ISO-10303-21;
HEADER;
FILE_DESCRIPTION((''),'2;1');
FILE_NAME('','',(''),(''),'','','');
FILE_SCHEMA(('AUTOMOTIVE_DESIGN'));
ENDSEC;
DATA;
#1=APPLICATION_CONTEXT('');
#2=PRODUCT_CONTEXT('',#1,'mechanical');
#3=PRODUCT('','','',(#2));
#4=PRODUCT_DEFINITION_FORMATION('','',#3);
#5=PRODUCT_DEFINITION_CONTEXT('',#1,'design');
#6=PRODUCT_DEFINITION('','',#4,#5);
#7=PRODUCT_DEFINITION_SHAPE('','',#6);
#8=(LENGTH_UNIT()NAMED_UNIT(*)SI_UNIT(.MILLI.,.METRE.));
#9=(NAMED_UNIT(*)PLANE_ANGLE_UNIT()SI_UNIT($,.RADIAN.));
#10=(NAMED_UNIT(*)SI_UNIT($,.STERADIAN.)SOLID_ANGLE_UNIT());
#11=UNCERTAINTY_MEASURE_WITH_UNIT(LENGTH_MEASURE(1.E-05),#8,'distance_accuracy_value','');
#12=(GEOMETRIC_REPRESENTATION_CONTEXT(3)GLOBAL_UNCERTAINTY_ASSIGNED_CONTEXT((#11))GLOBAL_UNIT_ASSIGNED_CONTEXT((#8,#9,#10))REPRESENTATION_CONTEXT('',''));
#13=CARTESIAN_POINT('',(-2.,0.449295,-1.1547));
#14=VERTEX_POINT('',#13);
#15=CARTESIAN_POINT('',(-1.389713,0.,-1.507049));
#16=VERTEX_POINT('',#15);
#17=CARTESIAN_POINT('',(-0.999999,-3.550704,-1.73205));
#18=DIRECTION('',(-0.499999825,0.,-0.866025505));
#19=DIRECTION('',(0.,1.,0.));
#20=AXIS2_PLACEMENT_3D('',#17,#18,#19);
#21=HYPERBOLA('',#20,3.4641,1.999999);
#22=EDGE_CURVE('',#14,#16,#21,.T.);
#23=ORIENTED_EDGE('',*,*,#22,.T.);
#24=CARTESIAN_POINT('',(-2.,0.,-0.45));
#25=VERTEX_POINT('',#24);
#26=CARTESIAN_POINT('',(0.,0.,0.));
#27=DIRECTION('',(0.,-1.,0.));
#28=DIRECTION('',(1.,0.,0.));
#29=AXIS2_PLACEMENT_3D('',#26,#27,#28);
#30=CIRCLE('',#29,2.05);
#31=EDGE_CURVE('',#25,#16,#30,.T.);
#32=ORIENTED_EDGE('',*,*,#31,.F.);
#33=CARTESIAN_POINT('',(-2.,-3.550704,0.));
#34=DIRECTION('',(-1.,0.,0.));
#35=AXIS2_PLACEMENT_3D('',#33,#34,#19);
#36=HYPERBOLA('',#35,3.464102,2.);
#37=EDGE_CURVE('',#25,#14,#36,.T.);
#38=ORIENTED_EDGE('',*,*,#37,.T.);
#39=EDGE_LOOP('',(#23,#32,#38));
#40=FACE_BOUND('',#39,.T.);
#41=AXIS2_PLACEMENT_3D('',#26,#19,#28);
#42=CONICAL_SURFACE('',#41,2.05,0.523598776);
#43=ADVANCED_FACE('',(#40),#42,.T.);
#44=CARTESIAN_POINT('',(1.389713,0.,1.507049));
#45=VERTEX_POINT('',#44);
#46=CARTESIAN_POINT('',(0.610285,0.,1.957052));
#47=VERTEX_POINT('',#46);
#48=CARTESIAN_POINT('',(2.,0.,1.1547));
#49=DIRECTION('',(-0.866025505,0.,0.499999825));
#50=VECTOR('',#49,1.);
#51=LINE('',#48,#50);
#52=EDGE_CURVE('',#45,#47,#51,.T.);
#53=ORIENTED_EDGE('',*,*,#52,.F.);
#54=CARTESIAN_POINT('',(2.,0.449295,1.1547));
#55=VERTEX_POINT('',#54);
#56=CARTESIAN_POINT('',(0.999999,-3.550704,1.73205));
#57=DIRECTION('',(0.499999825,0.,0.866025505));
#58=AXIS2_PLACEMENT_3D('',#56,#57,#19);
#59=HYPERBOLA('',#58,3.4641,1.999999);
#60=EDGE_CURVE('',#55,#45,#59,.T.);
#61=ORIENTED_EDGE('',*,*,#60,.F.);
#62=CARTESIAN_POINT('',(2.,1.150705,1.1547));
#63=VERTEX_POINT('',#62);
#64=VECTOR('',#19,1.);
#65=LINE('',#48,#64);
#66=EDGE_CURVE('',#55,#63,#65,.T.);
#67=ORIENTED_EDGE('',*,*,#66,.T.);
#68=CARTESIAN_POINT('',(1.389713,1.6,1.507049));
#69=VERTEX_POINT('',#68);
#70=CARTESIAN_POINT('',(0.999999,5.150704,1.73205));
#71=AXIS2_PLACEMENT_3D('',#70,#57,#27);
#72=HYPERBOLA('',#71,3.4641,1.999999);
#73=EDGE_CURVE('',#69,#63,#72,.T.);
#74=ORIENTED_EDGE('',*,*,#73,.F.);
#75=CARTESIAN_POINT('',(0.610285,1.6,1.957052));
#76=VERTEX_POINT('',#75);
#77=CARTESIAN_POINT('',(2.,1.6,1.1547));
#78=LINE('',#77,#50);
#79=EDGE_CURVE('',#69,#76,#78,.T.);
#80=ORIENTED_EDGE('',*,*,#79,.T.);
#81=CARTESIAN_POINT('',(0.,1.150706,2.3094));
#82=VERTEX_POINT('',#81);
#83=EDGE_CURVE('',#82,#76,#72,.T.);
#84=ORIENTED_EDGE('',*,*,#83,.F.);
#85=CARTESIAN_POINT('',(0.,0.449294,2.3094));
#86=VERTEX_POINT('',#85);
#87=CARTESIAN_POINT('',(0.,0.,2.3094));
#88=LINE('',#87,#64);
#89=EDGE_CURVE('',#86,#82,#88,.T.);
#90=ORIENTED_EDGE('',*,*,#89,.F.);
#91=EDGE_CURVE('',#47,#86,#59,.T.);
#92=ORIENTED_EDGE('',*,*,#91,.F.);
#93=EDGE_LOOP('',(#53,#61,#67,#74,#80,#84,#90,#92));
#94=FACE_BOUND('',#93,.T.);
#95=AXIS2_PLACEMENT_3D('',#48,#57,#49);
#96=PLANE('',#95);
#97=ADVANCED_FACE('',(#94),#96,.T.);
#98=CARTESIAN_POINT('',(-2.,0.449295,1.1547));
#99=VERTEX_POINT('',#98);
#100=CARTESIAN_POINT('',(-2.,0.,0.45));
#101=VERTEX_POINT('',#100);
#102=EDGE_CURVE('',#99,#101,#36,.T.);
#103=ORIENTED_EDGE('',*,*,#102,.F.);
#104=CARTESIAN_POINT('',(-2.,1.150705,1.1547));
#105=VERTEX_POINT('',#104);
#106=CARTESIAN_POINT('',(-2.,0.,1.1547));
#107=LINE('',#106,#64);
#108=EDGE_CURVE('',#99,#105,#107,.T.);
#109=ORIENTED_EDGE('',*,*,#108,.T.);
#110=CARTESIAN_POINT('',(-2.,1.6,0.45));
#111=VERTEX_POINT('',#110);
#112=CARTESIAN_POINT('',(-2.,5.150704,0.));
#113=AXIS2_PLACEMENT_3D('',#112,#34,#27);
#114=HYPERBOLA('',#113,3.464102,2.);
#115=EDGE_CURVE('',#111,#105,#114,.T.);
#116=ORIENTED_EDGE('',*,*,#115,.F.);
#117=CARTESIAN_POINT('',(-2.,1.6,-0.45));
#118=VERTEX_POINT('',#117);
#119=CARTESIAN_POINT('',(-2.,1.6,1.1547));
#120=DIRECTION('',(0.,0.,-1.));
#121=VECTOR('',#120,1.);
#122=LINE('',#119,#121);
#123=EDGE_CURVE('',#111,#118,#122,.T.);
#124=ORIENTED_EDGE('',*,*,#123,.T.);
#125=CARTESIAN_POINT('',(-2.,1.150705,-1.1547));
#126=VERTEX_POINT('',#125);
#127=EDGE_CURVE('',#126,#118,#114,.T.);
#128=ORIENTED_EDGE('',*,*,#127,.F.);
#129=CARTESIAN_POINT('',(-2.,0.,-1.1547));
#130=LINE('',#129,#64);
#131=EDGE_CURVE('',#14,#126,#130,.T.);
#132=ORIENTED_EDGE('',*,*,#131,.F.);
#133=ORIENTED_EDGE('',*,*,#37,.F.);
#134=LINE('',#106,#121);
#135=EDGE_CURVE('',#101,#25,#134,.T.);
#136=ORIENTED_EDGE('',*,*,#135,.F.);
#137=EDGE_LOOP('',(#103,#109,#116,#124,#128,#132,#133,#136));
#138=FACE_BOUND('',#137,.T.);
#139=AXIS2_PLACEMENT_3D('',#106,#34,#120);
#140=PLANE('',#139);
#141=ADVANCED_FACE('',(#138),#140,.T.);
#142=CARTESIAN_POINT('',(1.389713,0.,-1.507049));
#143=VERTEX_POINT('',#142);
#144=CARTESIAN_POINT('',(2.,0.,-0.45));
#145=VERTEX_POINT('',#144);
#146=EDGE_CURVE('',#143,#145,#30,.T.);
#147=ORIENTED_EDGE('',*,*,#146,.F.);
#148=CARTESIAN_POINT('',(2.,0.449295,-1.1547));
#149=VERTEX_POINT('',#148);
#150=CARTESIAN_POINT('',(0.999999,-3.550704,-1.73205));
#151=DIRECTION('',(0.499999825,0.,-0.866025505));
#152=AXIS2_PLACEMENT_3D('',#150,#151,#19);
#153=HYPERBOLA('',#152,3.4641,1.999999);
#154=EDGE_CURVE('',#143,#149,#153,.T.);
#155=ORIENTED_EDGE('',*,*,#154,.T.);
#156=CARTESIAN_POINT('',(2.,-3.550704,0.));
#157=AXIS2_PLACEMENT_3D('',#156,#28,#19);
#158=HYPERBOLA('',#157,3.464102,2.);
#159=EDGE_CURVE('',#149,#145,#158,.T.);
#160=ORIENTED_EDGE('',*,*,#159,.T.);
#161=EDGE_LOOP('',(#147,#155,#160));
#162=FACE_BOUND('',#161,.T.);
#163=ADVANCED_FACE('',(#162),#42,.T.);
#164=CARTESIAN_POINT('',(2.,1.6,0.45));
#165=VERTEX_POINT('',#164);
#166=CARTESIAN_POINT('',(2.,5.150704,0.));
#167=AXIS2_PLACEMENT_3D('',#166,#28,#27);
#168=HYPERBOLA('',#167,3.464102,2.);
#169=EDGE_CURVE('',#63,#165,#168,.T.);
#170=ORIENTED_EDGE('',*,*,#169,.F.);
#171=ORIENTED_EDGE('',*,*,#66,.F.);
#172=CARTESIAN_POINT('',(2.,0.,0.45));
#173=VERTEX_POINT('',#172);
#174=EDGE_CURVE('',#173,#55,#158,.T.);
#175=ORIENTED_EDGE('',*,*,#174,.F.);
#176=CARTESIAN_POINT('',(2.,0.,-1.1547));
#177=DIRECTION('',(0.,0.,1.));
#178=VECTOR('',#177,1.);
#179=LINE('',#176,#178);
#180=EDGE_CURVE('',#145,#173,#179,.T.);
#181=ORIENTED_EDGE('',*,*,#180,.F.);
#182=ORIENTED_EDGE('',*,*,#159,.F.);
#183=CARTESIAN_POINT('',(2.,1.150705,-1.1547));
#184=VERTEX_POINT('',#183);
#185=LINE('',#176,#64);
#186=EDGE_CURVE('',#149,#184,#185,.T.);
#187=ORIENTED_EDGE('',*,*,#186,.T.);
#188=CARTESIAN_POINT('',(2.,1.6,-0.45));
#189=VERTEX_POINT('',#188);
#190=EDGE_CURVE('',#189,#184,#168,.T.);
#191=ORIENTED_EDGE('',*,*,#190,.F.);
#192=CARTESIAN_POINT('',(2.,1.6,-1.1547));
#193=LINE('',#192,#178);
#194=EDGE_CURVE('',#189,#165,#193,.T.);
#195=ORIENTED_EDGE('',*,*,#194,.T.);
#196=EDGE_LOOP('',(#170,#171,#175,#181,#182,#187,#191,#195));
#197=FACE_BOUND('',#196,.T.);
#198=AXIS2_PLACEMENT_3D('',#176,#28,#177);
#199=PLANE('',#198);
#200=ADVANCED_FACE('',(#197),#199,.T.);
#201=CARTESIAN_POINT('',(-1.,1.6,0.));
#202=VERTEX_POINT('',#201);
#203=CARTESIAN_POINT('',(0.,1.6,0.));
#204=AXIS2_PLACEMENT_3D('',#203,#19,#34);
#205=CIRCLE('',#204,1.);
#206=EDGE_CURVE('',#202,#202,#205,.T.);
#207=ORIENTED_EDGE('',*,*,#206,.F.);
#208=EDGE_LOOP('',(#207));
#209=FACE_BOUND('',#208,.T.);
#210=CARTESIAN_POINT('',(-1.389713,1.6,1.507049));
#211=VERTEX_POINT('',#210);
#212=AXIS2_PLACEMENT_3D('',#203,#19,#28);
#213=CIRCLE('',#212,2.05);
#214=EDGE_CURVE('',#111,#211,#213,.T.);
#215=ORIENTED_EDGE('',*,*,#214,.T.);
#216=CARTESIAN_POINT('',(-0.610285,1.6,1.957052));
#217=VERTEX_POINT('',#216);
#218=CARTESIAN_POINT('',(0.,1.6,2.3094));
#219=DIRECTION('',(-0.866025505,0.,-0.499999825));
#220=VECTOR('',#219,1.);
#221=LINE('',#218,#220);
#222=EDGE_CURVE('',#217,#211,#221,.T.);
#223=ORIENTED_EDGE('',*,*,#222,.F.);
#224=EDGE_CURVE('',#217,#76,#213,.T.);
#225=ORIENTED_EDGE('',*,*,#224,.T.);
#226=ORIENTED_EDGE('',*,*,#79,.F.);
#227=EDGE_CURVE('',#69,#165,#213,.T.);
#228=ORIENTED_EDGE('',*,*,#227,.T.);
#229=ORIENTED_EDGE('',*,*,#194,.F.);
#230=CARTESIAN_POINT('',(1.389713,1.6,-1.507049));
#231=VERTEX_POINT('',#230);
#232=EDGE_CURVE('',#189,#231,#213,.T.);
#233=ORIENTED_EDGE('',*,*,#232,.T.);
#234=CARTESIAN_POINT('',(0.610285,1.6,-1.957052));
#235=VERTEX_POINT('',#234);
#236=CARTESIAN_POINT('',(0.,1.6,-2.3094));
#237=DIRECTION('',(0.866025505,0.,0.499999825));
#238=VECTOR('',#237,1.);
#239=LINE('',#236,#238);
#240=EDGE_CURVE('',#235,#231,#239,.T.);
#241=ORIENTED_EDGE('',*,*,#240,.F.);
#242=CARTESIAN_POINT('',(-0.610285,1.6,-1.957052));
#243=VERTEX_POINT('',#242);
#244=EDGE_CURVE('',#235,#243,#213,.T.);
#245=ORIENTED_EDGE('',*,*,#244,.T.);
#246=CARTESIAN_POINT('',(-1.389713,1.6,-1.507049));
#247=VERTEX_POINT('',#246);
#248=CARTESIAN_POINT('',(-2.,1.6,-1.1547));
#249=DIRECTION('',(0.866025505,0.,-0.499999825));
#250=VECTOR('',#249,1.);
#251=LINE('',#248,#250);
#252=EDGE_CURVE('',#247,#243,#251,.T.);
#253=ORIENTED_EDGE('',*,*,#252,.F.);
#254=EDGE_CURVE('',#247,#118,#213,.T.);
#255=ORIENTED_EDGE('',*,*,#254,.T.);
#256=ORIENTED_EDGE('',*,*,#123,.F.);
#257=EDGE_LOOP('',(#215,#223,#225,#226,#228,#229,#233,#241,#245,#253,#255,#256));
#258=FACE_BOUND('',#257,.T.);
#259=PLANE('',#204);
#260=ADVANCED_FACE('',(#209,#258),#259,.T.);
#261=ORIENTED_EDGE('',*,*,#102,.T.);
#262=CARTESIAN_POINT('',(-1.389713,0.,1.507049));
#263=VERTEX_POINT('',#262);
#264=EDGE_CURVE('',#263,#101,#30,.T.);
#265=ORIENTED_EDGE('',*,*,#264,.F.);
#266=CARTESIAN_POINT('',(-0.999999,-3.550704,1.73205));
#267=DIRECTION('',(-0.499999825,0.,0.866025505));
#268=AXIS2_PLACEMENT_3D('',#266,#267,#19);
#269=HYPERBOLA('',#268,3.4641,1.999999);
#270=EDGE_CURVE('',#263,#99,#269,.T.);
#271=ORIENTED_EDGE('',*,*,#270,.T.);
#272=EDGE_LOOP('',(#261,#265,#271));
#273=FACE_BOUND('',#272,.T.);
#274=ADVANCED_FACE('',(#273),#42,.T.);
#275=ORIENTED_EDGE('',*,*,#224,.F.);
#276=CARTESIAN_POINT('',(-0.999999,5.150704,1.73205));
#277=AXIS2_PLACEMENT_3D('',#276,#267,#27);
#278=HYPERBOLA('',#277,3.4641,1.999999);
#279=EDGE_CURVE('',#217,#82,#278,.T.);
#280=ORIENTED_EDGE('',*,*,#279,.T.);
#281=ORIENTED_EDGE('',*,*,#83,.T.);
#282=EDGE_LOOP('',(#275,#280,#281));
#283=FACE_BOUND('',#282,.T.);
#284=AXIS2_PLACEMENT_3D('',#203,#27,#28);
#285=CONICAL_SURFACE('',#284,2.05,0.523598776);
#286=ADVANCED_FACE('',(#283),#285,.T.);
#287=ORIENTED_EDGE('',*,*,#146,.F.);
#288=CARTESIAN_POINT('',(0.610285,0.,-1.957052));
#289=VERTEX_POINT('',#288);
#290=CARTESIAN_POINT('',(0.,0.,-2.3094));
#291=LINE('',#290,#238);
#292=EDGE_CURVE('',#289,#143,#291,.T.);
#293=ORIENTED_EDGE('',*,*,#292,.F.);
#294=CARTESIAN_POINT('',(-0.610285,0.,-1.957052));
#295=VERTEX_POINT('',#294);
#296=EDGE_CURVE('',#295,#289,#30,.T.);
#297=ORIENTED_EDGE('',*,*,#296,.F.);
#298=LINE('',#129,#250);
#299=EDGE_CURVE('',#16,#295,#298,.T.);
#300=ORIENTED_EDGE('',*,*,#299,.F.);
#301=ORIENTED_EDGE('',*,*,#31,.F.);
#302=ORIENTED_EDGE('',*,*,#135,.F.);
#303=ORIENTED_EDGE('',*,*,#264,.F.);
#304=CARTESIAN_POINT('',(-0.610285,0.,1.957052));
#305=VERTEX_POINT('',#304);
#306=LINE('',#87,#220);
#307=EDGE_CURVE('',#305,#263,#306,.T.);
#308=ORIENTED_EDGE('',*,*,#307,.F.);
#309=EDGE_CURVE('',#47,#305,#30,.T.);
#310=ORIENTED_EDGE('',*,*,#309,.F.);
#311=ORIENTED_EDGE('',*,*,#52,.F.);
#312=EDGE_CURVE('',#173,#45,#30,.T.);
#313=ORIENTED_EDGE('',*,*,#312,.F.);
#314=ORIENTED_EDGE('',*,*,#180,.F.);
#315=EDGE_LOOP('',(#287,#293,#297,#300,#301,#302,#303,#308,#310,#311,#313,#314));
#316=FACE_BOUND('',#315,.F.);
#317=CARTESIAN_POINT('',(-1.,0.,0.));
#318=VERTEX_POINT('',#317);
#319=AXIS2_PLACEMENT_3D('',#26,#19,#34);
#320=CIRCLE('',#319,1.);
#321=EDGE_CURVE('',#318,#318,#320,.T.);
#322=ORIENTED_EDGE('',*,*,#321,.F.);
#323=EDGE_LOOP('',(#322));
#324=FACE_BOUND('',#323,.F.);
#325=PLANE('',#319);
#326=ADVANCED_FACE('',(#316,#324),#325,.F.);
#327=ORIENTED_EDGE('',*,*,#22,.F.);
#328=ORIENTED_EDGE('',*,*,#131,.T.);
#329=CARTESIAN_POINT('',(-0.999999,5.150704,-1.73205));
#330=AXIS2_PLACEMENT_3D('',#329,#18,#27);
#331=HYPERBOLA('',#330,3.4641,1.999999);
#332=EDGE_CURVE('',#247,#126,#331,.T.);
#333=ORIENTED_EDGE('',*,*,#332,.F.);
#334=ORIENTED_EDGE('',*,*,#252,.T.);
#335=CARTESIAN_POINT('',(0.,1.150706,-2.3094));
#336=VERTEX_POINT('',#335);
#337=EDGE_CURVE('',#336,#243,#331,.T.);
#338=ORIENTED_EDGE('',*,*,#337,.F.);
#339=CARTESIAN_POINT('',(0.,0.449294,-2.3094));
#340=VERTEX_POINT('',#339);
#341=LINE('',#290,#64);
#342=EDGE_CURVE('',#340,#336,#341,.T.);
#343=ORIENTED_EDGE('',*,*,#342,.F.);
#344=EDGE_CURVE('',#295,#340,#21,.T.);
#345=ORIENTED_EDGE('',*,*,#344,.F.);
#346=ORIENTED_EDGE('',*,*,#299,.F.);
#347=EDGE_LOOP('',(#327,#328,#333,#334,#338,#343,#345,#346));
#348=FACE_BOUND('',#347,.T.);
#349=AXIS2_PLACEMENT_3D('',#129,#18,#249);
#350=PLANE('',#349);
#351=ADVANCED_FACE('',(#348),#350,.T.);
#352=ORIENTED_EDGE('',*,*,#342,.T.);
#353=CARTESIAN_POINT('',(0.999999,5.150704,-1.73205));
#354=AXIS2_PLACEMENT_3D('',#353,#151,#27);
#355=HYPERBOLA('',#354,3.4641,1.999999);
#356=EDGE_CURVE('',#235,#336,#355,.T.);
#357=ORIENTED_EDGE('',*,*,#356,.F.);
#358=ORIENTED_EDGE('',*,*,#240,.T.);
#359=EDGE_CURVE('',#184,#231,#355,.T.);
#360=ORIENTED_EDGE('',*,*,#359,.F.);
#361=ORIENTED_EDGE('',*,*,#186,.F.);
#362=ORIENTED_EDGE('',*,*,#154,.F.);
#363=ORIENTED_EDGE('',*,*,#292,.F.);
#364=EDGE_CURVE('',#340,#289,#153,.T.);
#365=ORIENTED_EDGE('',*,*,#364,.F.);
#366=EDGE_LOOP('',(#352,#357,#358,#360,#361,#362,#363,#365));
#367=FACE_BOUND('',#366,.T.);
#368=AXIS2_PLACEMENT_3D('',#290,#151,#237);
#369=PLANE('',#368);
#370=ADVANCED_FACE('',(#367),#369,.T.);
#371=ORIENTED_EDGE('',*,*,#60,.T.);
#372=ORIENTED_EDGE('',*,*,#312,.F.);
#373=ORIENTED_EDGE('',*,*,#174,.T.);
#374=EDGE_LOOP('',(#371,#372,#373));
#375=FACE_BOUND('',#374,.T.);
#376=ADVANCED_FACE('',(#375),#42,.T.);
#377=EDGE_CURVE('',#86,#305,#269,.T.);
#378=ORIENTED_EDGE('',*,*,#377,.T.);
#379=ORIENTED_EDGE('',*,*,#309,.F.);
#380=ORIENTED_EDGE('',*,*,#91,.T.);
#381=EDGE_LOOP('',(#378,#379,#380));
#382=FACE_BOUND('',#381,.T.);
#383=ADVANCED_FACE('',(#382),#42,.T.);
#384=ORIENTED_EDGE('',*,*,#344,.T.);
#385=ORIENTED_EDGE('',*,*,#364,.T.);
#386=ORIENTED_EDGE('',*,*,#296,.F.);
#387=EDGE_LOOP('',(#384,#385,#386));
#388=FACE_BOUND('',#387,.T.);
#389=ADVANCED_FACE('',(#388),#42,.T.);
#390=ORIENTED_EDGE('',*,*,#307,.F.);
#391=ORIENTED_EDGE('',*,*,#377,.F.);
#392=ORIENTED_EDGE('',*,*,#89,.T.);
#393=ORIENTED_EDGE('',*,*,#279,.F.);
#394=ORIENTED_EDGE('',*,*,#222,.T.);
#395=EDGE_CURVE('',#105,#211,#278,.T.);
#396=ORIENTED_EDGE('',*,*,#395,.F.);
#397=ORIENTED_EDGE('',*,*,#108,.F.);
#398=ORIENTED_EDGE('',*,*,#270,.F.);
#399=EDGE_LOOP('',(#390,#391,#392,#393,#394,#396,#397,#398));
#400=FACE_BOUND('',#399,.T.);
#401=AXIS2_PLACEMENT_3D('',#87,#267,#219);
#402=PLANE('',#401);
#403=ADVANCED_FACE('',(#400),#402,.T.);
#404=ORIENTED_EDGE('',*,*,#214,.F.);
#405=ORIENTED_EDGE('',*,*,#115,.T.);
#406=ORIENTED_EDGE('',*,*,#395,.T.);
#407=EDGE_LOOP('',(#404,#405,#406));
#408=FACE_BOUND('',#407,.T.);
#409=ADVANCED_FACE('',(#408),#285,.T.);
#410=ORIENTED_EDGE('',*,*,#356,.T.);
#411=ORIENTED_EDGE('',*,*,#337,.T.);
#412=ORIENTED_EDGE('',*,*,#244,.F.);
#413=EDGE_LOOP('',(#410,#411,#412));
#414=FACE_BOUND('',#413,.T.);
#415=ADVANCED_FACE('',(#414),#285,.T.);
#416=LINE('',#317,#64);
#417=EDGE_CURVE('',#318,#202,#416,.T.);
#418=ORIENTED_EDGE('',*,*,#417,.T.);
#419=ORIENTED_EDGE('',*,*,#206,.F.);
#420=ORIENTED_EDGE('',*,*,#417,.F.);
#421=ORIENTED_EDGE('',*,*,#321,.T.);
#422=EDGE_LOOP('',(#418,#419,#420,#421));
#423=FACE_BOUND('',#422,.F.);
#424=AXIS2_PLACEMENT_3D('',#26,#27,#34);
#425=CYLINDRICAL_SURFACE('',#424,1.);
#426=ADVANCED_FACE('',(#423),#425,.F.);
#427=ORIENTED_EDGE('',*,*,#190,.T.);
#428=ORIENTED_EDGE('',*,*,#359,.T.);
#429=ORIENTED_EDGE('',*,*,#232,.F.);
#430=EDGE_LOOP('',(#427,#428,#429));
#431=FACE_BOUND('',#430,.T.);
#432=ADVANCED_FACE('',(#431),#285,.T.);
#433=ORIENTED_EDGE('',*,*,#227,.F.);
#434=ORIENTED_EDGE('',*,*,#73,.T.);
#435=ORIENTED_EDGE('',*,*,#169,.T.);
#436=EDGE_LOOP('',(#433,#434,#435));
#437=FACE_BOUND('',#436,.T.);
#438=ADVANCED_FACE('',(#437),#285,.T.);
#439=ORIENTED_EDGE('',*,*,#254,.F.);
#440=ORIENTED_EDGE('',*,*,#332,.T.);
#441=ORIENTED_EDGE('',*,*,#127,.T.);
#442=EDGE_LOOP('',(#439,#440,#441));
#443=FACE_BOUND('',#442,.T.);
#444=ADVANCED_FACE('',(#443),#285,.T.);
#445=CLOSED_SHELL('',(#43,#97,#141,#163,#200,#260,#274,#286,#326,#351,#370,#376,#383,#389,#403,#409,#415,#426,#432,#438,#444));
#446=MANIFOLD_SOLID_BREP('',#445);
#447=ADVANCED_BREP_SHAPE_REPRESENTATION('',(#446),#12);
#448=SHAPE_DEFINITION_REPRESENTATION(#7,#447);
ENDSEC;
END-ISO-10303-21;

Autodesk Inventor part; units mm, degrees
ref_plane "YZ Plane" through (0, 0, 0) normal (1, 0, 0) x (0, 1, 0)
ref_plane "XZ Plane" through (0, 0, 0) normal (0, 1, 0) x (-1, 0, 0)
ref_plane "XY Plane" through (0, 0, 0) normal (0, 0, 1) x (1, 0, 0)
sketch "Sketch1" plane through (0, 0, 0) normal (0, 1, 0) x (-1, 0, 0)
  line L0 (2, 1.1547) -> (2, -1.1547)
  line L1 (2, -1.1547) -> (0, -2.3094)
  line L2 (0, -2.3094) -> (-2, -1.1547)
  line L3 (-2, -1.1547) -> (-2, 1.1547)
  line L4 (-2, 1.1547) -> (0, 2.3094)
  line L5 (0, 2.3094) -> (2, 1.1547)
  circle A0 centre (0, 0) radius 1
  dimension "d0" = 4
  dimension "d1" = 2
extrude "Extrusion1" add sketch "Sketch1" along normal blind 1.6
thread "Thread1" size "M2x0.4" class "6H" standard "ISO Metric profile" length 11.5
sketch "Sketch2" plane through (0, 1.6, 0) normal (0, 1, 0) x (1, 0, 0)
  circle A0 centre (0, 0) radius 2.05
  dimension "d7" = 4.1
extrude "Extrusion2" cut sketch "Sketch2" against normal blind 1.6 draft 30 keep common part
sketch "Sketch3" plane through (0, 0, 0) normal (0, -1, 0) x (1, 0, 0)
  circle A0 centre (0, 0) radius 2.05
  dimension "d10" = 4.1
extrude "Extrusion3" cut sketch "Sketch3" against normal blind 1.6 draft 30 keep common part
properties part number "Nut_M2_Brass" material "Brass"
